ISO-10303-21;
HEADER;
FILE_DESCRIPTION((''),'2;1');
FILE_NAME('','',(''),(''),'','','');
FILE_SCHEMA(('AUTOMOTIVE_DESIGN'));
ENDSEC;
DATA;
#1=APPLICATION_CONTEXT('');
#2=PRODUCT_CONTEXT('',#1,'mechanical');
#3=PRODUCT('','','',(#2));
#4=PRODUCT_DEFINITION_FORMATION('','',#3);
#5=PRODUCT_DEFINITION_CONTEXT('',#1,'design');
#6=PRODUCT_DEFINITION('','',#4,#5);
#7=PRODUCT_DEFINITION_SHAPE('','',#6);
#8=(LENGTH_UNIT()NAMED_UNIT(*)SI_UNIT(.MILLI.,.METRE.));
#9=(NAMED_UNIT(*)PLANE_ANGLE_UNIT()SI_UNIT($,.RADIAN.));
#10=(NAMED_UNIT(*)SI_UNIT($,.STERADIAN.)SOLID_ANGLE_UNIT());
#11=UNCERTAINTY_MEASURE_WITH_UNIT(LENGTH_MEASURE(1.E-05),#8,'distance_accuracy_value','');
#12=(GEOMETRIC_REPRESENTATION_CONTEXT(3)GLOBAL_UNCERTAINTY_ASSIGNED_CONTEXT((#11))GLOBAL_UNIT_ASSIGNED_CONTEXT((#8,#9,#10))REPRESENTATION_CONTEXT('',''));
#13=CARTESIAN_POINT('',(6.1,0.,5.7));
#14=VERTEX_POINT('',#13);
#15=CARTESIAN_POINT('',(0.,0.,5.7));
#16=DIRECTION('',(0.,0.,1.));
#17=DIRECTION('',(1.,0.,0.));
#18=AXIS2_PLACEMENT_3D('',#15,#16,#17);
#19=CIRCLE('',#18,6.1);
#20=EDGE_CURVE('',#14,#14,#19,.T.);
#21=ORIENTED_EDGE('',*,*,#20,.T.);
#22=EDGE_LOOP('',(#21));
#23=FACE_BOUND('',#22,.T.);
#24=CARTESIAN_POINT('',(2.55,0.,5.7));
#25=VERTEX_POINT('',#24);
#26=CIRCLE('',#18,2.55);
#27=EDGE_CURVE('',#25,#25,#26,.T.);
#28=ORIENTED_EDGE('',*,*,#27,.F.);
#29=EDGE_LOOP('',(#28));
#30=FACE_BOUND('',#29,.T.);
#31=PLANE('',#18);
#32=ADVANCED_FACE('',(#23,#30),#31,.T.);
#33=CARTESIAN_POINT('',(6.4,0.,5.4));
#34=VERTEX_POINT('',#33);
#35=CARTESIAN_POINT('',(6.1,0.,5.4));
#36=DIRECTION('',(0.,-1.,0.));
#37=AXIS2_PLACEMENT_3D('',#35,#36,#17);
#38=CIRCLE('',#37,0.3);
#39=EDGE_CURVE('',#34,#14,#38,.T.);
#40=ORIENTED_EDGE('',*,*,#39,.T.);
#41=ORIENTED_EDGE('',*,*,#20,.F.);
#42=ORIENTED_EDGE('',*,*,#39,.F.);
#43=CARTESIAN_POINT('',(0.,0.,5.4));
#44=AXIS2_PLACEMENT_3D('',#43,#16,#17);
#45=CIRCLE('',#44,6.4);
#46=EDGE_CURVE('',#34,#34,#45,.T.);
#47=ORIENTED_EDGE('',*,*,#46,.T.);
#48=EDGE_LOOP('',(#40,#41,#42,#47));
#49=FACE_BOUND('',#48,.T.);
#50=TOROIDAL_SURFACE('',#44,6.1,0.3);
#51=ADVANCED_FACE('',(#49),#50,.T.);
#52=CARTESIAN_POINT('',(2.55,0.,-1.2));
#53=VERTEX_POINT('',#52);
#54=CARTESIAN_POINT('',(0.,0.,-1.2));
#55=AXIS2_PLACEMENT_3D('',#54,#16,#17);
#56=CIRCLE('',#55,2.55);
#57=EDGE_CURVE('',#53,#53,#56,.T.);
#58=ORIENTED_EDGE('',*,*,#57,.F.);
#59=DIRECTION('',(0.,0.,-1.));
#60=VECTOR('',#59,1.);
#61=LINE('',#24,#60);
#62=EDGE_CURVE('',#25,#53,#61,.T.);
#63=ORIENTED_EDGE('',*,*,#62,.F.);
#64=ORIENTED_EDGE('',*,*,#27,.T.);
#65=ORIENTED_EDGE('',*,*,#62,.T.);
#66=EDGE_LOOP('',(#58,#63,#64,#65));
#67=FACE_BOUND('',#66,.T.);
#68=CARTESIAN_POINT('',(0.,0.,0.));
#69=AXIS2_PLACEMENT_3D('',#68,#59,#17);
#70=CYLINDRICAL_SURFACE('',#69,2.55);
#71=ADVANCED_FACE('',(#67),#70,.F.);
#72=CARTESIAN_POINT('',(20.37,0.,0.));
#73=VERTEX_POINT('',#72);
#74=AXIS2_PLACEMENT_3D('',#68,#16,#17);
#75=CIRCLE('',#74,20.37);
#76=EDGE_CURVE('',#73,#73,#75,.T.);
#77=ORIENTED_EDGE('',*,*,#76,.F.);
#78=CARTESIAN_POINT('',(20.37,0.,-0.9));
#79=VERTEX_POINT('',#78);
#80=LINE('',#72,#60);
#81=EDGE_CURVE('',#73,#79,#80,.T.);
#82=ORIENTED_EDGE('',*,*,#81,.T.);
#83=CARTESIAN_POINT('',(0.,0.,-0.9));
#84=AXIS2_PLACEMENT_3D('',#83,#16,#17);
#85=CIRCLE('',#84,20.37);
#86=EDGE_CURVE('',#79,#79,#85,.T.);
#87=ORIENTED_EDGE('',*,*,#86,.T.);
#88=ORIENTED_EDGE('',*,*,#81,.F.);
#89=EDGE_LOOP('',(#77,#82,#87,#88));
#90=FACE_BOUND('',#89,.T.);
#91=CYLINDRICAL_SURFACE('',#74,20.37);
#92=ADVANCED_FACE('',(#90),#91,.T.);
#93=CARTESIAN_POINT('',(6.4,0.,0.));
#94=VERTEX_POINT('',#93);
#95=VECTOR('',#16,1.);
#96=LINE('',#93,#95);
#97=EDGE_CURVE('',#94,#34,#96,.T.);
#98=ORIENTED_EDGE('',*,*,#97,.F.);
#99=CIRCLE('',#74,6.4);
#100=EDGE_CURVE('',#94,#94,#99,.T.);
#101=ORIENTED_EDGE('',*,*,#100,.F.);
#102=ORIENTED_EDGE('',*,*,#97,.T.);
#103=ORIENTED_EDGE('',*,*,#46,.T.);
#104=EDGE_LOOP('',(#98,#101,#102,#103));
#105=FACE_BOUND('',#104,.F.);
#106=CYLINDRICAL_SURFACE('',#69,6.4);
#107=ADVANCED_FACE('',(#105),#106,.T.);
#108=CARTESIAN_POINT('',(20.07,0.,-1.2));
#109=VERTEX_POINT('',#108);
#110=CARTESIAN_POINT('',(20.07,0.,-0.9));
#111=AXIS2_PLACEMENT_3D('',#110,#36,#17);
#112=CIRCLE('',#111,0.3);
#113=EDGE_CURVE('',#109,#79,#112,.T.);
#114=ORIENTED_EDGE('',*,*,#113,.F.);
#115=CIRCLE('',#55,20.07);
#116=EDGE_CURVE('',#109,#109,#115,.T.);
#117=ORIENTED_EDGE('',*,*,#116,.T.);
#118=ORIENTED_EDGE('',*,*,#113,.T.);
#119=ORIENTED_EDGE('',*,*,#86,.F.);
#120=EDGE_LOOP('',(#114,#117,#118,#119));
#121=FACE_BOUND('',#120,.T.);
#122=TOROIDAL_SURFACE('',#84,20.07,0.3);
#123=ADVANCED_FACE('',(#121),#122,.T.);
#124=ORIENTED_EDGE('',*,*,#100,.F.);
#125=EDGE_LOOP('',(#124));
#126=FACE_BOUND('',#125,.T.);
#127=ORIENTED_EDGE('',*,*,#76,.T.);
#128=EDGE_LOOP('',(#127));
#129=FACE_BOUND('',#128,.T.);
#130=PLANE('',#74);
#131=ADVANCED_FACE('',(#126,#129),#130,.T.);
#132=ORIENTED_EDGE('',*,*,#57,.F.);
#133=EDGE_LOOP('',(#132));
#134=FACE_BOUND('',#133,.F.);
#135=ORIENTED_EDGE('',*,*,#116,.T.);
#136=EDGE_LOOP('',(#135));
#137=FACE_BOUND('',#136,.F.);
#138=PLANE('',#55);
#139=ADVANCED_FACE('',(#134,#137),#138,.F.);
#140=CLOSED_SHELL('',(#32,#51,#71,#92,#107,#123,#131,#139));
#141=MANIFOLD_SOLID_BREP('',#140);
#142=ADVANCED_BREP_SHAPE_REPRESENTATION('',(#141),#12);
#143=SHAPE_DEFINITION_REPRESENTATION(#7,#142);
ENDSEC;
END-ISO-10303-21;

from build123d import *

# Parameters (mm, degrees)
F0_R     = 20.37
F0_R_2   = 6.4
F0_R_3   = 2.55
F1_DEPTH = 1.2
F2_DEPTH = 5.7
F3_R     = 0.3


# Not quite as in the source:
# - a feature names something its author has since deleted; it is built from what else it names


with BuildPart() as f1:
    # F0 (on Top) → F1 (new body)
    with BuildSketch(Plane.XY):
        Circle(F0_R)
        Circle(F0_R_2, mode=Mode.SUBTRACT)
        Circle(F0_R_2)
        Circle(F0_R_3, mode=Mode.SUBTRACT)
    extrude(amount=-F1_DEPTH)

    # F0 (on Top) → F2 (join)
    with BuildSketch(Plane.XY):
        Circle(F0_R_2)
        Circle(F0_R_3, mode=Mode.SUBTRACT)
    extrude(amount=F2_DEPTH)

    # F3
    f3_edges = [f1.edges().sort_by_distance(p)[0] for p in [
        (-20.37, 0, -1.2),
        (-6.4, 0, 5.7),
    ]]
    fillet(f3_edges, radius=F3_R)


solid = f1.part
